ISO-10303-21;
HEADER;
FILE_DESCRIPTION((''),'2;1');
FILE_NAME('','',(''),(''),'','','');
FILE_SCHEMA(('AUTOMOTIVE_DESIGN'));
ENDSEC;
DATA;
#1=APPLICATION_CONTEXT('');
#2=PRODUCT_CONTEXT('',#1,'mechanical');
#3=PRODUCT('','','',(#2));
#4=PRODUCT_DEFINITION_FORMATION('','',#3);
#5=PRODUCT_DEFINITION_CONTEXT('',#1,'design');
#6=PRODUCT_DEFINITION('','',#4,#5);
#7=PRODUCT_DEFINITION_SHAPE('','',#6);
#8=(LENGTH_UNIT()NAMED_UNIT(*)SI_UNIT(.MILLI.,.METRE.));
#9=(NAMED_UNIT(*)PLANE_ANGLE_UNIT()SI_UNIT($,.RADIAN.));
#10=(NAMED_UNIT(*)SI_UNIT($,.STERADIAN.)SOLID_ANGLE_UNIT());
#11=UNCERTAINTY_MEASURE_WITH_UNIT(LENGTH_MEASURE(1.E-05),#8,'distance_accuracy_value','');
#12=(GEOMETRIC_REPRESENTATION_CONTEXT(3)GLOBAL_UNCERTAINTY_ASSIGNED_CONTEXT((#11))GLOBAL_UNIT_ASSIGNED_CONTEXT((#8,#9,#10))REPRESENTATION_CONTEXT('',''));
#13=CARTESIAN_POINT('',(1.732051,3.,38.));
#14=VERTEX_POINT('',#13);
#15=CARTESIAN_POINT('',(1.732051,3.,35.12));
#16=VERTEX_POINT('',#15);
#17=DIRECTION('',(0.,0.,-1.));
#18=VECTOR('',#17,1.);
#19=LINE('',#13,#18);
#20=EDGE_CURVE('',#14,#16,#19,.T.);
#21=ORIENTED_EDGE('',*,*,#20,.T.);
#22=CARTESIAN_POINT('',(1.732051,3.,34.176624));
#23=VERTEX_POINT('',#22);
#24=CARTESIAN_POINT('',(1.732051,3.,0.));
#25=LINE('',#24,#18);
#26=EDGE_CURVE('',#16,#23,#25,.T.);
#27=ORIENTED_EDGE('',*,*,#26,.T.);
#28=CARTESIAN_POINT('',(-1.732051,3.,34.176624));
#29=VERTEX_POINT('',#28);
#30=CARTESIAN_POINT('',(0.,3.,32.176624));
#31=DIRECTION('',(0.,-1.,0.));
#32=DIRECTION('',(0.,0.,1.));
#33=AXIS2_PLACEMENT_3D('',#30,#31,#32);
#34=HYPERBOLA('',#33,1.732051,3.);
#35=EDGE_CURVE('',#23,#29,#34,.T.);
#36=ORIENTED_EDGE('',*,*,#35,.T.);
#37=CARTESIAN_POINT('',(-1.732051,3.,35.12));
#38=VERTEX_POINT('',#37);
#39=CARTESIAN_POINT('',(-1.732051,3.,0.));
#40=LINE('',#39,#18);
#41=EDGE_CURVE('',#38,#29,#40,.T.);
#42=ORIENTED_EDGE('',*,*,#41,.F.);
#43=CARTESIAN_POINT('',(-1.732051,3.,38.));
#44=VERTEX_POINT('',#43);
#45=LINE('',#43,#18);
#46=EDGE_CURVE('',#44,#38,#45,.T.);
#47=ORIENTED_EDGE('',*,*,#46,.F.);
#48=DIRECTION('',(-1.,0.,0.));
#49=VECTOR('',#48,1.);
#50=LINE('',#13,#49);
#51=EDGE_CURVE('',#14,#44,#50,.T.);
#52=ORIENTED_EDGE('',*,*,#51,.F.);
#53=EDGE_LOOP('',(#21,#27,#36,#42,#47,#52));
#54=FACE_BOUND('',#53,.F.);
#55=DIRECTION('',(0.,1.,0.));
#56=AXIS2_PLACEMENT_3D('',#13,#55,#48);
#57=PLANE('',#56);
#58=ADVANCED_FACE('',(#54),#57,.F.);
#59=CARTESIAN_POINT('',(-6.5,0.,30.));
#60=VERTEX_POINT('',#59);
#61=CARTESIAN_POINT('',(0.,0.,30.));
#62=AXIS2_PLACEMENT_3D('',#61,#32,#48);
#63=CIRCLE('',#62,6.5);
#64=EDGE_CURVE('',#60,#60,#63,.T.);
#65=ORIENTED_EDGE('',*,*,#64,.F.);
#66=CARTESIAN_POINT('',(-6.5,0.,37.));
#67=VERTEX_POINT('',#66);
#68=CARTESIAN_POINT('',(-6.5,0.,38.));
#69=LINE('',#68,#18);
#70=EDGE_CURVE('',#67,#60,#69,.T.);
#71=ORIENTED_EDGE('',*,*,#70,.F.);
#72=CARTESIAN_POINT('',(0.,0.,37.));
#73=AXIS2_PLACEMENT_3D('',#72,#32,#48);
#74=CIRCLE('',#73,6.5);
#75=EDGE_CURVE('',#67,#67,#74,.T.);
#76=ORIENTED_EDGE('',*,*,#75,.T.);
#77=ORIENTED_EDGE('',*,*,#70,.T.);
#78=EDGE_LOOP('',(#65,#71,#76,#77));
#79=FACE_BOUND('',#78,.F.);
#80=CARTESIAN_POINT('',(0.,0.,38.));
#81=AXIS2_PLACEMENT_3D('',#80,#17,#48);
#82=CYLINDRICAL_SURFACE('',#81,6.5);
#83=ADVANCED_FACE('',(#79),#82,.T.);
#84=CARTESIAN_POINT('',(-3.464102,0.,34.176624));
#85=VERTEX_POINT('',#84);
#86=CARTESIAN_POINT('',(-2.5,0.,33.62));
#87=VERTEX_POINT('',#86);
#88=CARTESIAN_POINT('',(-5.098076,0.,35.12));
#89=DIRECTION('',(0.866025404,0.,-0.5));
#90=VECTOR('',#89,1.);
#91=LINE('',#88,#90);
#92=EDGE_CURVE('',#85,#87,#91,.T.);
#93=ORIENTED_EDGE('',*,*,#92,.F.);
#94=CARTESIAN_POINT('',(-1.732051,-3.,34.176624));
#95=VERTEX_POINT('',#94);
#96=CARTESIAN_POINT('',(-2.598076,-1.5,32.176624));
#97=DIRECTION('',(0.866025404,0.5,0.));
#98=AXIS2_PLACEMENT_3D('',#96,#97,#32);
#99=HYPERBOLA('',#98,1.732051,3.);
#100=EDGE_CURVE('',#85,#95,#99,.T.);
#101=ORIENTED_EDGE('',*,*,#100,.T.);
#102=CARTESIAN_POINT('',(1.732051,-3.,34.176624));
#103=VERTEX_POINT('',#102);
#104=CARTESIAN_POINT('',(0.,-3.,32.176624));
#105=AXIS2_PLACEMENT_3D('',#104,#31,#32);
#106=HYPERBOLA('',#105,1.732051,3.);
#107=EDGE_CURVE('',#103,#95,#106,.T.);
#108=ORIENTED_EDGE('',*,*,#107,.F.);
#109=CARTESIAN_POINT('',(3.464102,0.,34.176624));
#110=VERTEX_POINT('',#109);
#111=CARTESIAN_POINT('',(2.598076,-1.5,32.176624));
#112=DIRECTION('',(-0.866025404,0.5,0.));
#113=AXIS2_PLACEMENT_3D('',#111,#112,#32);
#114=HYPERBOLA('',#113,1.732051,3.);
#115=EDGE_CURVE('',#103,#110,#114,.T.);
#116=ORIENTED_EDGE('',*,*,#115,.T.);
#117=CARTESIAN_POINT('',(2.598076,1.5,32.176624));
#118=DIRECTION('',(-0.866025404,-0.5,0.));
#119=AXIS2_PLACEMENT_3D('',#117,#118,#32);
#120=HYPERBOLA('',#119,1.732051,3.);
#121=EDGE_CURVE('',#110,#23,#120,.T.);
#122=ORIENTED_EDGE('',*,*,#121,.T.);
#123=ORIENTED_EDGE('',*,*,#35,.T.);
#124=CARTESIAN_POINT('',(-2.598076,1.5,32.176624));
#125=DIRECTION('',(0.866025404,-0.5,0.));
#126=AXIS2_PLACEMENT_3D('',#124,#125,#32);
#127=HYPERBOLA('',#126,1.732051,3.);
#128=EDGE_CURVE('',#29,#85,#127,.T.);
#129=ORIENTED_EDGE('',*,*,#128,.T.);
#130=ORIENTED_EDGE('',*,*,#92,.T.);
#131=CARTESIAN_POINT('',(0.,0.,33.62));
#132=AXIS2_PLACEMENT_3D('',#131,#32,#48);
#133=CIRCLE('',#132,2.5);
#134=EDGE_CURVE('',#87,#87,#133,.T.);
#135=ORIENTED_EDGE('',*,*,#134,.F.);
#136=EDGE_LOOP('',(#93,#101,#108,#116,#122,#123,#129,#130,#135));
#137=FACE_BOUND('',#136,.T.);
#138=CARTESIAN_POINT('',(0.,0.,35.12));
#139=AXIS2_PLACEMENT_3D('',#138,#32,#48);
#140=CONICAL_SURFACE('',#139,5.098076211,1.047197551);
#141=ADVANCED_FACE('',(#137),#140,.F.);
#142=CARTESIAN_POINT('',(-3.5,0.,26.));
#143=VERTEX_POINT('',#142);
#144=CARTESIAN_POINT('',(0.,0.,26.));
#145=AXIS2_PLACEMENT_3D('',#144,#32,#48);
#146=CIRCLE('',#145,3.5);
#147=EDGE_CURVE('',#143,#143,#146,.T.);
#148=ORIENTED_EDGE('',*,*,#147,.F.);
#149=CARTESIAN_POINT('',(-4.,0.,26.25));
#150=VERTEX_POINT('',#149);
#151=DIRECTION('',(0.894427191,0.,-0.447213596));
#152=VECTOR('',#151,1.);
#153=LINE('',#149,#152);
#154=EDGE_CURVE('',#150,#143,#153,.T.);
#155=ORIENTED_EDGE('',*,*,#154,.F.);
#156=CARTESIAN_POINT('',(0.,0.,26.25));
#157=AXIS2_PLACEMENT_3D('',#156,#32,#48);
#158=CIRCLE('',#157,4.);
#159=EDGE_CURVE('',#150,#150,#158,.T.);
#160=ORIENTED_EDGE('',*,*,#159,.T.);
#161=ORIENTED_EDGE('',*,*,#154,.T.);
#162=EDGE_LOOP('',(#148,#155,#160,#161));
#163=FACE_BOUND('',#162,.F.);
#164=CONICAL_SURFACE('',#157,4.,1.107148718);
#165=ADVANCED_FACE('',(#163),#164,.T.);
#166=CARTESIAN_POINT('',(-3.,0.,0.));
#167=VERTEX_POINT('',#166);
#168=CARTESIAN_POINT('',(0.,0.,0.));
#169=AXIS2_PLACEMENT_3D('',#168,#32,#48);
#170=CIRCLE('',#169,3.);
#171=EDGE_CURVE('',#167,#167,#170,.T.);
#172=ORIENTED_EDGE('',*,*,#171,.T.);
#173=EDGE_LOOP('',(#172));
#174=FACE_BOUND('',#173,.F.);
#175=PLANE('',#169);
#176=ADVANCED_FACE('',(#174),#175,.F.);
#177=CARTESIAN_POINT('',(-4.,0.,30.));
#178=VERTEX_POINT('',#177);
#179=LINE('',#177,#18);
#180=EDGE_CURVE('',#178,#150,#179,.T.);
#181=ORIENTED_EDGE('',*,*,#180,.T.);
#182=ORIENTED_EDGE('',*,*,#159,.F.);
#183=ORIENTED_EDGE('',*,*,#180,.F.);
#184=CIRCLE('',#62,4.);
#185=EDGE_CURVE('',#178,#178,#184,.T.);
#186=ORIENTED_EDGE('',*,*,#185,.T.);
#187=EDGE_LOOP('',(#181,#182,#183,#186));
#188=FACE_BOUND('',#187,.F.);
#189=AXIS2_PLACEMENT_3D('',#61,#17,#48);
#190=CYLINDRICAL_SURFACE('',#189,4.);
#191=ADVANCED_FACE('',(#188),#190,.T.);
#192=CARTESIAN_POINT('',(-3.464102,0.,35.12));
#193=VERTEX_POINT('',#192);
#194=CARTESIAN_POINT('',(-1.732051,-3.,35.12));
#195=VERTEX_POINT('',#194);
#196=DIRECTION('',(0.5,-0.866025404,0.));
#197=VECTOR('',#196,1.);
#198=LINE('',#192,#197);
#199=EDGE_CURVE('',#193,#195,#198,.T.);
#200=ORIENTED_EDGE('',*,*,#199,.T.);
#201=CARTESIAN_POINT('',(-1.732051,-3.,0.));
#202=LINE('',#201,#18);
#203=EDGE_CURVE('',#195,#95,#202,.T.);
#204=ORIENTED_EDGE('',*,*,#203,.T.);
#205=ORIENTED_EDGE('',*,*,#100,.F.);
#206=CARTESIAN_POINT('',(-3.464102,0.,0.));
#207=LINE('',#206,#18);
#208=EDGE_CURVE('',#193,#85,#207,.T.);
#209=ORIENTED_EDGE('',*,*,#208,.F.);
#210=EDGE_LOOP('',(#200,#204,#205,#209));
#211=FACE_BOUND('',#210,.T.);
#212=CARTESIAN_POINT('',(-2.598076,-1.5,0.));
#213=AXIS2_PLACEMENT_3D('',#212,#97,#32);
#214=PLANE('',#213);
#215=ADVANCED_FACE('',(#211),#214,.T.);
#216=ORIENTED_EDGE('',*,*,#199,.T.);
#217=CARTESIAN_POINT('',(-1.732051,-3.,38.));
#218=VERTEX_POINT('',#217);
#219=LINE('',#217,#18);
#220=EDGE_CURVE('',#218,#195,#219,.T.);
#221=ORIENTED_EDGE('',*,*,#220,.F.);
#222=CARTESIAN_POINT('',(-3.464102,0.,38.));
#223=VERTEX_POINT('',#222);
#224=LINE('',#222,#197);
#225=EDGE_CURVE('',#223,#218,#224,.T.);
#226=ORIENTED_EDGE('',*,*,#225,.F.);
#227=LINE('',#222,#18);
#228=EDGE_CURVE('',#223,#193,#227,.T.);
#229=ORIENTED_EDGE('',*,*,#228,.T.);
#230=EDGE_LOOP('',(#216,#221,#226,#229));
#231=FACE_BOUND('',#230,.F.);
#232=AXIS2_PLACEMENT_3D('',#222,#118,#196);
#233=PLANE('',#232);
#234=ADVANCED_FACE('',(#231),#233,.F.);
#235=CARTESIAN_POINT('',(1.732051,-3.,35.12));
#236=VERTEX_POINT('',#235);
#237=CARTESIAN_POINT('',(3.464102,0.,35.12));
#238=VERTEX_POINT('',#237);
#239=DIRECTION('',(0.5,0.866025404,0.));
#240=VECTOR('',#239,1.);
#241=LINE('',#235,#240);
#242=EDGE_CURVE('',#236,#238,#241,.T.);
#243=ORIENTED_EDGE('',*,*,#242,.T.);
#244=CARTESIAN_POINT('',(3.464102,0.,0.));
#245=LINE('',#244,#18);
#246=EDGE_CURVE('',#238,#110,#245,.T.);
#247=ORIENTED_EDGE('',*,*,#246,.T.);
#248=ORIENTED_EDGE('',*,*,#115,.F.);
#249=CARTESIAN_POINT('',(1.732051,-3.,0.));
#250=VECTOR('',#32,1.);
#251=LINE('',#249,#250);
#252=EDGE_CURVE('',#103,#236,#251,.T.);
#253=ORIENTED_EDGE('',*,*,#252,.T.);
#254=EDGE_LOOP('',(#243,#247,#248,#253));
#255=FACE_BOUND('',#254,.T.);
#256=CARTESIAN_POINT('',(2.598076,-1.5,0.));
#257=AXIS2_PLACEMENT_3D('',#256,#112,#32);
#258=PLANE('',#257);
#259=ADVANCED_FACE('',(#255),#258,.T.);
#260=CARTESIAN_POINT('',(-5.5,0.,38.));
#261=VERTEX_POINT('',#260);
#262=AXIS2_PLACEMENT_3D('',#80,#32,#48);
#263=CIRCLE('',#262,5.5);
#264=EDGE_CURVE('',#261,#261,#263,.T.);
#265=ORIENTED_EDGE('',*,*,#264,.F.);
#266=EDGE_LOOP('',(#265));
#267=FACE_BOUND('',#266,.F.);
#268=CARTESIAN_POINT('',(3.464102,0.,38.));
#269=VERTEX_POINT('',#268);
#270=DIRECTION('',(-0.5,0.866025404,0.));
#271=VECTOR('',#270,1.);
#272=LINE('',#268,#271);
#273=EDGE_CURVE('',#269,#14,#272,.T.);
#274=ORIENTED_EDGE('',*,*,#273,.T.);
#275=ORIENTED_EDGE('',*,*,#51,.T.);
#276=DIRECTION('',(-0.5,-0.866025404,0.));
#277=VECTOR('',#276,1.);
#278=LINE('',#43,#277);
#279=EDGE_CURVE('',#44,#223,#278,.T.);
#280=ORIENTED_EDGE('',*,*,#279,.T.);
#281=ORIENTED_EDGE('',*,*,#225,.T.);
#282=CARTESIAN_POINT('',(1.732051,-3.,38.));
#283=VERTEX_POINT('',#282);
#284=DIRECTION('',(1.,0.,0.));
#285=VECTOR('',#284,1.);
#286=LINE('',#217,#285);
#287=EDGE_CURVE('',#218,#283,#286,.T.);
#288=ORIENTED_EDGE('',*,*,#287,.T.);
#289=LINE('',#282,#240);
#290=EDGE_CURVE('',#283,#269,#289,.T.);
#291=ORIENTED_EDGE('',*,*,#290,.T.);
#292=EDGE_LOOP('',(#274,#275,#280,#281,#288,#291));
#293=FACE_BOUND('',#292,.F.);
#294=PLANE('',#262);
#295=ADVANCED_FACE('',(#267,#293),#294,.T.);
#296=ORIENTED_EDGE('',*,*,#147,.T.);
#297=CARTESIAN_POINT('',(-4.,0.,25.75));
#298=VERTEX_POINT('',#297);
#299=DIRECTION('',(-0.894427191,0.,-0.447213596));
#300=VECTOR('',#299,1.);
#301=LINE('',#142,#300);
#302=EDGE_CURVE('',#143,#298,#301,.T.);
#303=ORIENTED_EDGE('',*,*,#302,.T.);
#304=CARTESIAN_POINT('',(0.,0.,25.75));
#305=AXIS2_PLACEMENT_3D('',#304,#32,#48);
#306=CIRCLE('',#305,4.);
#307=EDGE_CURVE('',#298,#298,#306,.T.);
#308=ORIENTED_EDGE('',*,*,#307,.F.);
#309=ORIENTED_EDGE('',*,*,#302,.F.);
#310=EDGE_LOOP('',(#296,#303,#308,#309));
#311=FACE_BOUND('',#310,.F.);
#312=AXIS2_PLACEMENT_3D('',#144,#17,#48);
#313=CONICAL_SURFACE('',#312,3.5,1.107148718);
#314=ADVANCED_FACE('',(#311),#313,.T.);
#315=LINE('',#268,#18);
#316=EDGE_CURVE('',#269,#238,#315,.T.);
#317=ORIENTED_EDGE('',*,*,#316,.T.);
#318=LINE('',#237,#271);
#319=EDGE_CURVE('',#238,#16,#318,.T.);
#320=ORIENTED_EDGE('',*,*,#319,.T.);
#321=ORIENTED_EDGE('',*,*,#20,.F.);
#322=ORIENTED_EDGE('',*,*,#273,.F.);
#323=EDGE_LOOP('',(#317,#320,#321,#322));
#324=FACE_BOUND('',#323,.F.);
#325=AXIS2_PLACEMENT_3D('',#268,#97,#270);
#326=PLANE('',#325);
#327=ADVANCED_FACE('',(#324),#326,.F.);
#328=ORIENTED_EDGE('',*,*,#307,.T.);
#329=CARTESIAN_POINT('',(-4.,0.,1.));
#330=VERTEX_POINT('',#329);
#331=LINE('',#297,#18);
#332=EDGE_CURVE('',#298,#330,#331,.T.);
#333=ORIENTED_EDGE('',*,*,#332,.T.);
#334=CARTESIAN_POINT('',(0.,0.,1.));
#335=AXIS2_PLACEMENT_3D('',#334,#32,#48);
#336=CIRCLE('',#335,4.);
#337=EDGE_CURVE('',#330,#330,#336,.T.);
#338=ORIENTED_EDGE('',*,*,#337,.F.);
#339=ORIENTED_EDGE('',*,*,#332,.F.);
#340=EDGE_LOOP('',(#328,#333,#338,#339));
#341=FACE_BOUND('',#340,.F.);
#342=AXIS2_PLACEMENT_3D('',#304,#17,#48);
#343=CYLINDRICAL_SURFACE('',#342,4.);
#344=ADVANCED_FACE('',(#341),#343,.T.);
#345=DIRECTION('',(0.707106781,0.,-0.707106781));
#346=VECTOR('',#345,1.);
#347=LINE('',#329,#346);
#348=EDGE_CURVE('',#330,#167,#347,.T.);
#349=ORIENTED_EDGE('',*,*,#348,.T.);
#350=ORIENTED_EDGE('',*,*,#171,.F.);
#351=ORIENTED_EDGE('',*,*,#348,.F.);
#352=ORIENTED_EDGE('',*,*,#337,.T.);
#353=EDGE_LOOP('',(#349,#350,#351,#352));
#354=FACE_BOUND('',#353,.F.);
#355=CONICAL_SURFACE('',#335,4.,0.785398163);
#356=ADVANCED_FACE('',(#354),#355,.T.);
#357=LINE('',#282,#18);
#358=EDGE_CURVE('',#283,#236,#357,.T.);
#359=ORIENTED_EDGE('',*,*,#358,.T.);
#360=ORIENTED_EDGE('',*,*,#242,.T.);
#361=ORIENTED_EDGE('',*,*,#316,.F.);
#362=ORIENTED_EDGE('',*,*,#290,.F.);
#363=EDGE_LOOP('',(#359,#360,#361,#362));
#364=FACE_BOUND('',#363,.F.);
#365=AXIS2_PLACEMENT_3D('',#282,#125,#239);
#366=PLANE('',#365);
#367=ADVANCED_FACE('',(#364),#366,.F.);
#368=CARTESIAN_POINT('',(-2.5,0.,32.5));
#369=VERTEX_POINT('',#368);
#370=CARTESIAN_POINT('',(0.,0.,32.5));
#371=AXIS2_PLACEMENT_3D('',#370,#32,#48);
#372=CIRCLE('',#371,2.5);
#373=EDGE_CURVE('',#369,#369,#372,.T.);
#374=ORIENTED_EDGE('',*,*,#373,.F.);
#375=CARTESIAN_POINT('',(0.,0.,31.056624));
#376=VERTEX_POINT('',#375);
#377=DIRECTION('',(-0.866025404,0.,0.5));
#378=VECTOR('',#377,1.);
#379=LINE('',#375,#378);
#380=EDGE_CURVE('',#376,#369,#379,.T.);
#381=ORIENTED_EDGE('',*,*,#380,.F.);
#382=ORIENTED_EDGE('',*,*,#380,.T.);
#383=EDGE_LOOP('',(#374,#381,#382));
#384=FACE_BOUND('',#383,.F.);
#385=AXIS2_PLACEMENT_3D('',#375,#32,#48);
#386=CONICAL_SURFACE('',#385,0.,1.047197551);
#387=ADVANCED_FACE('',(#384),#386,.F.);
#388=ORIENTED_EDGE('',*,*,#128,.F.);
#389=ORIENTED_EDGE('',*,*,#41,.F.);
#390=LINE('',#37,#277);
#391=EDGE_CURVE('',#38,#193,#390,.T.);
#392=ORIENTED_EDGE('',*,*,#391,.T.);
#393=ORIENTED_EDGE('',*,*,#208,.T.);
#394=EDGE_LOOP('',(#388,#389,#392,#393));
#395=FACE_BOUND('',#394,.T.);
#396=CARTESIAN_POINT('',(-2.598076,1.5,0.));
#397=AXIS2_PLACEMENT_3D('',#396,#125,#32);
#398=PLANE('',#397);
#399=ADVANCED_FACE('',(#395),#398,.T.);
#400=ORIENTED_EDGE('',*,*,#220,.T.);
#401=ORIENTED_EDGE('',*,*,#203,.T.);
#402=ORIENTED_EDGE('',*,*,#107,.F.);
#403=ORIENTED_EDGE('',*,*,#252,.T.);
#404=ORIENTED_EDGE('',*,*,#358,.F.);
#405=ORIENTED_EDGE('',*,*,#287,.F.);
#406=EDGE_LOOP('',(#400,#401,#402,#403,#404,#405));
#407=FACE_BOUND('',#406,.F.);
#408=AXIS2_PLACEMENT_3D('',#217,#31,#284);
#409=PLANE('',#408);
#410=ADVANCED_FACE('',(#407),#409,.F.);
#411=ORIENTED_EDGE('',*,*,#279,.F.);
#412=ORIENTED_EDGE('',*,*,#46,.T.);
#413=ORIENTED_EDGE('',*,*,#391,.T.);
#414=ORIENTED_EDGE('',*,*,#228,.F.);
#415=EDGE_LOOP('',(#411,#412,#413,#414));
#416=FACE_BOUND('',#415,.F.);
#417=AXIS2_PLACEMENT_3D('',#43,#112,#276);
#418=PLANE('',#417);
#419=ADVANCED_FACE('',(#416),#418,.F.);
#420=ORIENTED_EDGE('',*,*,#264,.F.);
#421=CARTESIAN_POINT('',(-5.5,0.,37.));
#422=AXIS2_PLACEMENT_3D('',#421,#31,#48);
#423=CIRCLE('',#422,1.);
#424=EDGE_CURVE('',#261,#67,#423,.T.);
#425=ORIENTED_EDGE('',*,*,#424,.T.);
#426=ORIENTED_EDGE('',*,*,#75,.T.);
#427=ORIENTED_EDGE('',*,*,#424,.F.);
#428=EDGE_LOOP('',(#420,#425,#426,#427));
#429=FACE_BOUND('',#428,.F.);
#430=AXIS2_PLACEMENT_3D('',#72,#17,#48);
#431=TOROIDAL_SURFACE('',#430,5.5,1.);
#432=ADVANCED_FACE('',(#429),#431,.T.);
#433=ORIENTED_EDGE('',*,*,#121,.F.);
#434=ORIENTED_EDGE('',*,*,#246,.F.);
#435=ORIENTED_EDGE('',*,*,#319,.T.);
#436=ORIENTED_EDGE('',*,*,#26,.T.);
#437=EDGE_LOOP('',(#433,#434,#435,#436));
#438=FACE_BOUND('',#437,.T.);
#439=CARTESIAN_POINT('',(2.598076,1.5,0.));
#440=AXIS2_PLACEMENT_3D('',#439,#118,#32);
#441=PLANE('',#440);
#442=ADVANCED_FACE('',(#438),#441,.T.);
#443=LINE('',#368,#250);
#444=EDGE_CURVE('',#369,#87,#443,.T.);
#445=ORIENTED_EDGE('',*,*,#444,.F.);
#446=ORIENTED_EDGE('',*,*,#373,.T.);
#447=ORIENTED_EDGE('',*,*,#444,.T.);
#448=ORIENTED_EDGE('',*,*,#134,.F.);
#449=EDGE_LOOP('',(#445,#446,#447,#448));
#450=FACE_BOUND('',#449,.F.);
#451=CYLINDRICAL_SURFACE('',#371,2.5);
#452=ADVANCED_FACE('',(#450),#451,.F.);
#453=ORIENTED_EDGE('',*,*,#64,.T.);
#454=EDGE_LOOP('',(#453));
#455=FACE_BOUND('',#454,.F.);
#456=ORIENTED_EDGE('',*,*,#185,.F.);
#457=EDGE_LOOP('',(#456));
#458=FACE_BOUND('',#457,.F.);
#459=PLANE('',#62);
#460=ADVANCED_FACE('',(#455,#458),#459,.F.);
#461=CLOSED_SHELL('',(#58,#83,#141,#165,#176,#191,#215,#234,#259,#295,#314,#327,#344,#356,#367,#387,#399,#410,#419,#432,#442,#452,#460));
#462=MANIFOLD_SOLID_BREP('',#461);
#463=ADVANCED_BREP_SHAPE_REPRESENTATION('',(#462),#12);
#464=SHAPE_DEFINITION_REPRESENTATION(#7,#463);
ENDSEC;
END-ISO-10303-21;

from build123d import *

# Parameters (mm, degrees)
F2_R     = 1
F3_SIZE  = 1
F5_DEPTH = 2.88


# Not quite as in the source:
# - a fillet or chamfer that OpenCascade refuses, or shapes differently, is made with other operations: its cross-section is extruded or revolved along the edge and cut away or added


with BuildPart() as f1:
    # F0 (on Front) → F1 (revolve)
    with BuildSketch(Plane.XZ):
        Polygon((-4, 0), (0, 0), (0, 31.056624327), (-2.5, 32.5), (-2.5, 38), (-6.5, 38), (-6.5, 30), (-4, 30), (-4, 26.25), (-3.5, 26), (-4, 25.75), align=None)
    revolve(axis=Axis((0, 0, 18.332445994), (0, 0, 1)))

    # F2
    f2_edges = [f1.edges().sort_by_distance(p)[0] for p in [
        (6.5, 0, 38),
    ]]
    fillet(f2_edges, radius=F2_R)

    # F3
    f3_edges = [f1.edges().sort_by_distance(p)[0] for p in [
        (4, 0, 0),
    ]]
    chamfer(f3_edges, length=F3_SIZE)

    # F4 (on face) → F5 (cut)
    with BuildSketch(Plane.XY.offset(38)):
        Polygon((-1.7320508076, -3), (1.7320508076, -3), (3.4641016151, 0), (1.7320508076, 3), (-1.7320508076, 3), (-3.4641016151, 0), align=None)
    extrude(amount=-F5_DEPTH, mode=Mode.SUBTRACT)

    # F6: chamfer of 1.5 x 2.5980762114 on 1 edges, made by hand


with BuildPart() as f6_tool2:
    # F6_s3 → F6_t4 (revolve)
    with BuildSketch(Plane.XZ):
        Polygon((-5.0980762114, 35.12), (-2.5, 33.62), (-2.5, 35.12), align=None)
    revolve(axis=Axis((0, 0, 35.12), (0, 0, 1)))

    split(bisect_by=Plane(origin=(-2.5980762114, -1.5, 0), x_dir=(0, 0, 1), z_dir=(0.8660254038, 0.5, 0)), keep=Keep.TOP)

    split(bisect_by=Plane(origin=(-2.5980762114, 1.5, 0), x_dir=(0, 0, 1), z_dir=(0.8660254038, -0.5, 0)), keep=Keep.TOP)

    split(bisect_by=Plane.XZ.offset(-3), keep=Keep.TOP)

    split(bisect_by=Plane(origin=(2.5980762114, 1.5, 0), x_dir=(0, 0, 1), z_dir=(-0.8660254038, -0.5, 0)), keep=Keep.TOP)

    split(bisect_by=Plane(origin=(2.5980762114, -1.5, 0), x_dir=(0, 0, 1), z_dir=(-0.8660254038, 0.5, 0)), keep=Keep.TOP)

    split(bisect_by=Plane.XZ.offset(3), keep=Keep.BOTTOM)


with BuildPart() as f1_1:
    add(f1.part)

    # F6_t1: cut F6_tool2
    add(f6_tool2.part, mode=Mode.SUBTRACT)


solid = f1_1.part
